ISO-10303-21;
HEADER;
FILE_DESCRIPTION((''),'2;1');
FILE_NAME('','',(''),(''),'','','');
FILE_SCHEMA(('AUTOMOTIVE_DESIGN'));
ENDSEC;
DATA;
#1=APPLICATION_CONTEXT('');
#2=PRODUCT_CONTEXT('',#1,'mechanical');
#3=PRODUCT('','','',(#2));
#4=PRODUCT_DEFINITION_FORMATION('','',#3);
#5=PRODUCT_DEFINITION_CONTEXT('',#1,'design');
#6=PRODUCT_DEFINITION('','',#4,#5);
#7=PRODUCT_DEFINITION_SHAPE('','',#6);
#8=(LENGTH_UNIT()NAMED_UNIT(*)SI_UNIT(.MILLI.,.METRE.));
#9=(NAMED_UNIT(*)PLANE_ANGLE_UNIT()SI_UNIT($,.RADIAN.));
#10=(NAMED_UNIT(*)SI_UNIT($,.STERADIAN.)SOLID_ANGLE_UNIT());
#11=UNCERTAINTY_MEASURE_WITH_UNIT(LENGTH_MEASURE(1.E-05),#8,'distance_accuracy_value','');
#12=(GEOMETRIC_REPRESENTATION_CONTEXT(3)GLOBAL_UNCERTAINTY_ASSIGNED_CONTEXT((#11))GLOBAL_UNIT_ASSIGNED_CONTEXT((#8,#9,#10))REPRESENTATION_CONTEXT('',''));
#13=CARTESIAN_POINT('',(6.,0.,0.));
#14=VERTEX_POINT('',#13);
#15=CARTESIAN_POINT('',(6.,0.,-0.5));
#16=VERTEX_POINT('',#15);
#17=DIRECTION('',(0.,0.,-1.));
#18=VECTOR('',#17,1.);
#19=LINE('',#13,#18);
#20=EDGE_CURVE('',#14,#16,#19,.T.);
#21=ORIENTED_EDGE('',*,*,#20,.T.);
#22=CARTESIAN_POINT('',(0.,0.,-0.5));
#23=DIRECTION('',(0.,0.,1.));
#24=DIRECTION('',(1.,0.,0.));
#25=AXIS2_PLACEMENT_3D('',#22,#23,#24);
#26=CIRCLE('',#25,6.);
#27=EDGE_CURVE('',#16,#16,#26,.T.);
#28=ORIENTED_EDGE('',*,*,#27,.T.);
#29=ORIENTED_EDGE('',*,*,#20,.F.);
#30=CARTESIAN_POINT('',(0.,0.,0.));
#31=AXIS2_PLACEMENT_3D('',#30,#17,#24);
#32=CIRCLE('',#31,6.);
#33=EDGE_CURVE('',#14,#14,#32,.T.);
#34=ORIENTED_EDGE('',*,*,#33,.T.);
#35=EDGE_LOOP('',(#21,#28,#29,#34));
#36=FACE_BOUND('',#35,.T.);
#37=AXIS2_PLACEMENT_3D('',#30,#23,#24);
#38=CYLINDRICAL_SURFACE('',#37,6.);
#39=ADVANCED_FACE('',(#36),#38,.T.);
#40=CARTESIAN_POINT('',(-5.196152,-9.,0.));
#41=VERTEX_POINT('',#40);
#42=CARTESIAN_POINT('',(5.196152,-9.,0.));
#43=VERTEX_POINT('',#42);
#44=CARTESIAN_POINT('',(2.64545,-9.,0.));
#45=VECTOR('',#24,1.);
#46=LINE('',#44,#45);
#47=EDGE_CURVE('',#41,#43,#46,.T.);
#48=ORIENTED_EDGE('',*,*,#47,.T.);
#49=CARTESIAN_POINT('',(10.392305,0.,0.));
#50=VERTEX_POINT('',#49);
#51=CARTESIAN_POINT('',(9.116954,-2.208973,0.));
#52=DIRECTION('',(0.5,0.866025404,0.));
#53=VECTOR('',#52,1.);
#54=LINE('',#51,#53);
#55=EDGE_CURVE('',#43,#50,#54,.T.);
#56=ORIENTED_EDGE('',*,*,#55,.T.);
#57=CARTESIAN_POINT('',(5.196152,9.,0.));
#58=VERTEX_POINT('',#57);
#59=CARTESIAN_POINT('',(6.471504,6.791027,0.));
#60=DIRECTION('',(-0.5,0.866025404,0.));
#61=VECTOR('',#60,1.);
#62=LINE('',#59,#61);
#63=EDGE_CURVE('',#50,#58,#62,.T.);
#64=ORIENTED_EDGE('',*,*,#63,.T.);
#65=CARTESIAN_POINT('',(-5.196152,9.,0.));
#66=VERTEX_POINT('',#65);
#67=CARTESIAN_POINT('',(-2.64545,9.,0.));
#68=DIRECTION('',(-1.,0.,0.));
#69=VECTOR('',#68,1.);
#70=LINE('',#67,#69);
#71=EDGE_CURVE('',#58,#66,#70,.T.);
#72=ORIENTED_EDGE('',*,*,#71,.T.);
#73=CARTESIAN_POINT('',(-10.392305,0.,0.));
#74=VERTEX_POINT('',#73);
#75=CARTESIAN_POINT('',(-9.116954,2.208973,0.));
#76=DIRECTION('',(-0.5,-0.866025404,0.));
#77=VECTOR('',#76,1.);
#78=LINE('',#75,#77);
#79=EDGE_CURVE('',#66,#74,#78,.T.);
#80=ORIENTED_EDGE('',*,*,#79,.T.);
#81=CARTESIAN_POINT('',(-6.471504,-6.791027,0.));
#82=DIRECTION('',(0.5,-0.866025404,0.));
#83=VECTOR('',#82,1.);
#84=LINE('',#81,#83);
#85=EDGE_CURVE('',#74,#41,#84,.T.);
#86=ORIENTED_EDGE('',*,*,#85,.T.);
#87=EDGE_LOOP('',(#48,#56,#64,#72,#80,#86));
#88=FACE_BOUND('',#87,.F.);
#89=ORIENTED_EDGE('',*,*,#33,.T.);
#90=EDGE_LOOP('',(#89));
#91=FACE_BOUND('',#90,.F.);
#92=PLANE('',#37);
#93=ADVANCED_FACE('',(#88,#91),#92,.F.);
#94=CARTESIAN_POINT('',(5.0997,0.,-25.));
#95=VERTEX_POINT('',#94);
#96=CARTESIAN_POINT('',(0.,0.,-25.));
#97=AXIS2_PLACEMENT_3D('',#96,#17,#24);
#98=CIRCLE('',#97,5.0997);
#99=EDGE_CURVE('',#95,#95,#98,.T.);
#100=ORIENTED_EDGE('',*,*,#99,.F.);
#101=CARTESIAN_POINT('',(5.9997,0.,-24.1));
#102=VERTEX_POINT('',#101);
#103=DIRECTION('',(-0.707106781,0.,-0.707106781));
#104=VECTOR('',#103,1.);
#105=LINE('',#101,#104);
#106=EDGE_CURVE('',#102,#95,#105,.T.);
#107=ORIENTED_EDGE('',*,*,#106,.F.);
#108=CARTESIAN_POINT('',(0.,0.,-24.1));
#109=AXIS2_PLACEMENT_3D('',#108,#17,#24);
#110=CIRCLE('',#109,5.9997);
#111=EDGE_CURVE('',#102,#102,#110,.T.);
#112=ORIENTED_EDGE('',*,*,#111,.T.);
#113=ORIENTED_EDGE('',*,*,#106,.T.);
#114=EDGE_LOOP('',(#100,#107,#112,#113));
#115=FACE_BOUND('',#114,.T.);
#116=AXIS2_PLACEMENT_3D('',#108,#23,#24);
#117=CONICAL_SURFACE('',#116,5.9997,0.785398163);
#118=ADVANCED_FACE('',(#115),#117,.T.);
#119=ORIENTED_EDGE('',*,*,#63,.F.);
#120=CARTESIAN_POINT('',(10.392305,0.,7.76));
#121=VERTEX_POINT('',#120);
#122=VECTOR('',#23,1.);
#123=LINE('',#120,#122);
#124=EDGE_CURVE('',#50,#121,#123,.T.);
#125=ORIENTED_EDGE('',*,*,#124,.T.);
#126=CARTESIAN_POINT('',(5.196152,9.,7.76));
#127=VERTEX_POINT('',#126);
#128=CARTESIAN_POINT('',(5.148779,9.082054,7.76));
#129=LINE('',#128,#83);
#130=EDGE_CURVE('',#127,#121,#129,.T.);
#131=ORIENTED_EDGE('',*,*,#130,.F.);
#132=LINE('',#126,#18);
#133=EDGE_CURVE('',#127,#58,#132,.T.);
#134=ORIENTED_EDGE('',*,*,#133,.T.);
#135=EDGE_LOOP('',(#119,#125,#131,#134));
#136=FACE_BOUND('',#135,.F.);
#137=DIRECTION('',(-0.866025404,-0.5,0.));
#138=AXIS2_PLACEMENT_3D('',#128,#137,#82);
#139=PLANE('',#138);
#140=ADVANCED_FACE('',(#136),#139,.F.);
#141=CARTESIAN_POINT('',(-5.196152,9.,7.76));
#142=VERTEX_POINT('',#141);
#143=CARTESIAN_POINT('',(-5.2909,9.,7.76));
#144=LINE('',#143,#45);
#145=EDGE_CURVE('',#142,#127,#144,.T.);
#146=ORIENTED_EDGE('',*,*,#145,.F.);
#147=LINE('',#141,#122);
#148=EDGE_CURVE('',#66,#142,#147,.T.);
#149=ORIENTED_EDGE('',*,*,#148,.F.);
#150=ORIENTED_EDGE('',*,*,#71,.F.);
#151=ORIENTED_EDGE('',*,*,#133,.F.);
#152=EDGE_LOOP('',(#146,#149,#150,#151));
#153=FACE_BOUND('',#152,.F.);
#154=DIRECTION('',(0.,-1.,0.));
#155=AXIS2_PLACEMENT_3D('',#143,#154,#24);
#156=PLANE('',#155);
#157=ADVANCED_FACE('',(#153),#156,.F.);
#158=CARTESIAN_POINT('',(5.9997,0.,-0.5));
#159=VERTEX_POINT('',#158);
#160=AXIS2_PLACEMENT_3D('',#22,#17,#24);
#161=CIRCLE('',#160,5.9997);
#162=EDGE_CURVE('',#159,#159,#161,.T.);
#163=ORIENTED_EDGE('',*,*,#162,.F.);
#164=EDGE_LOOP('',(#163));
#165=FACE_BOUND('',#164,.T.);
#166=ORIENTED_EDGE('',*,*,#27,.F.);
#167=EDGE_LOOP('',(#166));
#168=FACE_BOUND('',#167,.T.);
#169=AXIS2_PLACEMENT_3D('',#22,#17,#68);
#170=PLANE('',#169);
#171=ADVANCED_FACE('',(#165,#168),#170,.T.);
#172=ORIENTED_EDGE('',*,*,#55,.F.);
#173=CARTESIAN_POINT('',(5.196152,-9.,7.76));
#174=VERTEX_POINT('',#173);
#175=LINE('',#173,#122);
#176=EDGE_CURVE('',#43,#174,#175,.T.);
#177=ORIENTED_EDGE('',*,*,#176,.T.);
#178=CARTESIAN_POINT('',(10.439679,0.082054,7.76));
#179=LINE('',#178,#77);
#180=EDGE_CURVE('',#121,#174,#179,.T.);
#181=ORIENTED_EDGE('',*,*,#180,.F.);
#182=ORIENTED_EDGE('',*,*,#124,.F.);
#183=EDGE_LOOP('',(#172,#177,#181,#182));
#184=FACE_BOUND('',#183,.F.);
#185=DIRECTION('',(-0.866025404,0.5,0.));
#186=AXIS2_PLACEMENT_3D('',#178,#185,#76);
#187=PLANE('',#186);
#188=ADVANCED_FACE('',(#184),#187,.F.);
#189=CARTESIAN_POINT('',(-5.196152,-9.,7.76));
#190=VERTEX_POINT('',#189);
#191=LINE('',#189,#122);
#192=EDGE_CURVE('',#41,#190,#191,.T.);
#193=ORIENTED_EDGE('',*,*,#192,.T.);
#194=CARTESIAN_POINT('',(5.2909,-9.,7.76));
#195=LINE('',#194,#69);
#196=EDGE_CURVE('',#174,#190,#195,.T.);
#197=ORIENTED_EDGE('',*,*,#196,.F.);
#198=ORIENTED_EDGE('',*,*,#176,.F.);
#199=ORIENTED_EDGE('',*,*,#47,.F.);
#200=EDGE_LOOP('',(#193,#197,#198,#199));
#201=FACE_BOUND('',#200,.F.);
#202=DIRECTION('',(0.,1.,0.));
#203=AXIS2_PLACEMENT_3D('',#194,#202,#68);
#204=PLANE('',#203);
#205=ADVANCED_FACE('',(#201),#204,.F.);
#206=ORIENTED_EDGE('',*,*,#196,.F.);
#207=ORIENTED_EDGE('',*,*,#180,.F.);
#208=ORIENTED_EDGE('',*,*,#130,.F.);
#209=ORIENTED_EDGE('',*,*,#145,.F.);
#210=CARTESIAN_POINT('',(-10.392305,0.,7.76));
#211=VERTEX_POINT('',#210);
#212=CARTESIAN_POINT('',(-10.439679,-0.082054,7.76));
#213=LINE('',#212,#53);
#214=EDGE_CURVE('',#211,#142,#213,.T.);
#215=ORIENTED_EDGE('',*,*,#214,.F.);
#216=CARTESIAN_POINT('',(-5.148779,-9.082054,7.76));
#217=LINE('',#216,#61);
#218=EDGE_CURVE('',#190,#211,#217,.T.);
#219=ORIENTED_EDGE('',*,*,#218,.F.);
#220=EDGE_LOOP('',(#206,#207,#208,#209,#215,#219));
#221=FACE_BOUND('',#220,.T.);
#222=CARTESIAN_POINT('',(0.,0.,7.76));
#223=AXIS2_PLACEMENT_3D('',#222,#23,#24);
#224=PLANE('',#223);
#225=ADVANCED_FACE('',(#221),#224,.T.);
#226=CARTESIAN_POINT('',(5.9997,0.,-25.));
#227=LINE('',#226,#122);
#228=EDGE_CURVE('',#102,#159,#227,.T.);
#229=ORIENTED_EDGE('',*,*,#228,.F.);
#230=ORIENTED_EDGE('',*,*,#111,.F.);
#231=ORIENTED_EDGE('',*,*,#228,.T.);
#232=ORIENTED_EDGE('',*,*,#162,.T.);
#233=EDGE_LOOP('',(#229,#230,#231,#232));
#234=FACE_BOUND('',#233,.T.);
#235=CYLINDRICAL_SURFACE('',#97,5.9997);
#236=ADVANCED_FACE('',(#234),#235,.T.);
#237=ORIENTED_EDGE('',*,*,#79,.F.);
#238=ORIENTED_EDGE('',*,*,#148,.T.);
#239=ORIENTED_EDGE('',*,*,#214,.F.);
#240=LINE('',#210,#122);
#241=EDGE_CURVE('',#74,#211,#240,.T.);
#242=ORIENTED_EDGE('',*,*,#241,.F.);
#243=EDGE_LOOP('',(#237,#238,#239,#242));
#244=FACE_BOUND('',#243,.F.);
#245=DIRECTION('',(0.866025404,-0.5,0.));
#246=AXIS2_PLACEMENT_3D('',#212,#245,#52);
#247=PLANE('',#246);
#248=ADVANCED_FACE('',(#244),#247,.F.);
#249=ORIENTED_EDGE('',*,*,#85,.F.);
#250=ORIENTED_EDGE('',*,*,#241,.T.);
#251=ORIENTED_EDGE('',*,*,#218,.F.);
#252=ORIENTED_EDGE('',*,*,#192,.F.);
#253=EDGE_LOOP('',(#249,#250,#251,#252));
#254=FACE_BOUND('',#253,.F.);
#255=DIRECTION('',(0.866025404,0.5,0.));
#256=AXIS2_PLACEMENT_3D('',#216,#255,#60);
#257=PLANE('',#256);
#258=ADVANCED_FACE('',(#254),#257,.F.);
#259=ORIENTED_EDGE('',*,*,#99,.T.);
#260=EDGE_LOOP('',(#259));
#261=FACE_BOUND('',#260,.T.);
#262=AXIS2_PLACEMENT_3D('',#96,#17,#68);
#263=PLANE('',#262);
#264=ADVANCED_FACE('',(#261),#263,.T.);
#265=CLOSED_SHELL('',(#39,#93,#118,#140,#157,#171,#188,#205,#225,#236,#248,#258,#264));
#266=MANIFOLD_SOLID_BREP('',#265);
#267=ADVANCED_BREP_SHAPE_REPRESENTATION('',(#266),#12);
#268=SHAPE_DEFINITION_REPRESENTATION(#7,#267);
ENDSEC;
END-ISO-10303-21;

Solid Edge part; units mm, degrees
sketch "Sketch1" plane through (0, 0, 0) normal (0, 0, 1) x (1, 0, 0)
  circle A0 centre (0, 0) radius 10.44
  dimension "D1" = 20.88
extrude "Protrusion1" add sketch "Sketch1" along normal blind 7.76
sketch "Sketch2" plane through (0, 0, 0) normal (0, 0, -1) x (1, 0, 0)
  circle A0 centre (0, 0) radius 6
extrude "Protrusion2" add sketch "Sketch2" along normal blind 25
sketch "Sketch3" plane through (0, 0, -25) normal (0, 0, -1) x (1, 0, 0)
  circle A0 centre (0, 0) radius 5.9997
extrude "Cutout1" cut sketch "Sketch3" against normal blind 24.5 flip side to cut
chamfer "Chamfer_1" distance 0.9 angle 45 1 edges at (-5.9997, 0, -25)
sketch "Sketch4" plane through (0, 0, 7.76) normal (0, 0, 1) x (1, 0, 0)
  line L0 (-5.2909, 9) -> (5.2909, 9)
  dimension "D1" = 18
extrude "Cutout2" cut sketch "Sketch4" against normal up to next material side at (0, 9.05, 7.76)
pattern_circular "Pattern1" count 6 over 360 about axis through (0, 0, 7.76) along (0, 0, 1) of "Cutout2"
properties part number "24104925"
